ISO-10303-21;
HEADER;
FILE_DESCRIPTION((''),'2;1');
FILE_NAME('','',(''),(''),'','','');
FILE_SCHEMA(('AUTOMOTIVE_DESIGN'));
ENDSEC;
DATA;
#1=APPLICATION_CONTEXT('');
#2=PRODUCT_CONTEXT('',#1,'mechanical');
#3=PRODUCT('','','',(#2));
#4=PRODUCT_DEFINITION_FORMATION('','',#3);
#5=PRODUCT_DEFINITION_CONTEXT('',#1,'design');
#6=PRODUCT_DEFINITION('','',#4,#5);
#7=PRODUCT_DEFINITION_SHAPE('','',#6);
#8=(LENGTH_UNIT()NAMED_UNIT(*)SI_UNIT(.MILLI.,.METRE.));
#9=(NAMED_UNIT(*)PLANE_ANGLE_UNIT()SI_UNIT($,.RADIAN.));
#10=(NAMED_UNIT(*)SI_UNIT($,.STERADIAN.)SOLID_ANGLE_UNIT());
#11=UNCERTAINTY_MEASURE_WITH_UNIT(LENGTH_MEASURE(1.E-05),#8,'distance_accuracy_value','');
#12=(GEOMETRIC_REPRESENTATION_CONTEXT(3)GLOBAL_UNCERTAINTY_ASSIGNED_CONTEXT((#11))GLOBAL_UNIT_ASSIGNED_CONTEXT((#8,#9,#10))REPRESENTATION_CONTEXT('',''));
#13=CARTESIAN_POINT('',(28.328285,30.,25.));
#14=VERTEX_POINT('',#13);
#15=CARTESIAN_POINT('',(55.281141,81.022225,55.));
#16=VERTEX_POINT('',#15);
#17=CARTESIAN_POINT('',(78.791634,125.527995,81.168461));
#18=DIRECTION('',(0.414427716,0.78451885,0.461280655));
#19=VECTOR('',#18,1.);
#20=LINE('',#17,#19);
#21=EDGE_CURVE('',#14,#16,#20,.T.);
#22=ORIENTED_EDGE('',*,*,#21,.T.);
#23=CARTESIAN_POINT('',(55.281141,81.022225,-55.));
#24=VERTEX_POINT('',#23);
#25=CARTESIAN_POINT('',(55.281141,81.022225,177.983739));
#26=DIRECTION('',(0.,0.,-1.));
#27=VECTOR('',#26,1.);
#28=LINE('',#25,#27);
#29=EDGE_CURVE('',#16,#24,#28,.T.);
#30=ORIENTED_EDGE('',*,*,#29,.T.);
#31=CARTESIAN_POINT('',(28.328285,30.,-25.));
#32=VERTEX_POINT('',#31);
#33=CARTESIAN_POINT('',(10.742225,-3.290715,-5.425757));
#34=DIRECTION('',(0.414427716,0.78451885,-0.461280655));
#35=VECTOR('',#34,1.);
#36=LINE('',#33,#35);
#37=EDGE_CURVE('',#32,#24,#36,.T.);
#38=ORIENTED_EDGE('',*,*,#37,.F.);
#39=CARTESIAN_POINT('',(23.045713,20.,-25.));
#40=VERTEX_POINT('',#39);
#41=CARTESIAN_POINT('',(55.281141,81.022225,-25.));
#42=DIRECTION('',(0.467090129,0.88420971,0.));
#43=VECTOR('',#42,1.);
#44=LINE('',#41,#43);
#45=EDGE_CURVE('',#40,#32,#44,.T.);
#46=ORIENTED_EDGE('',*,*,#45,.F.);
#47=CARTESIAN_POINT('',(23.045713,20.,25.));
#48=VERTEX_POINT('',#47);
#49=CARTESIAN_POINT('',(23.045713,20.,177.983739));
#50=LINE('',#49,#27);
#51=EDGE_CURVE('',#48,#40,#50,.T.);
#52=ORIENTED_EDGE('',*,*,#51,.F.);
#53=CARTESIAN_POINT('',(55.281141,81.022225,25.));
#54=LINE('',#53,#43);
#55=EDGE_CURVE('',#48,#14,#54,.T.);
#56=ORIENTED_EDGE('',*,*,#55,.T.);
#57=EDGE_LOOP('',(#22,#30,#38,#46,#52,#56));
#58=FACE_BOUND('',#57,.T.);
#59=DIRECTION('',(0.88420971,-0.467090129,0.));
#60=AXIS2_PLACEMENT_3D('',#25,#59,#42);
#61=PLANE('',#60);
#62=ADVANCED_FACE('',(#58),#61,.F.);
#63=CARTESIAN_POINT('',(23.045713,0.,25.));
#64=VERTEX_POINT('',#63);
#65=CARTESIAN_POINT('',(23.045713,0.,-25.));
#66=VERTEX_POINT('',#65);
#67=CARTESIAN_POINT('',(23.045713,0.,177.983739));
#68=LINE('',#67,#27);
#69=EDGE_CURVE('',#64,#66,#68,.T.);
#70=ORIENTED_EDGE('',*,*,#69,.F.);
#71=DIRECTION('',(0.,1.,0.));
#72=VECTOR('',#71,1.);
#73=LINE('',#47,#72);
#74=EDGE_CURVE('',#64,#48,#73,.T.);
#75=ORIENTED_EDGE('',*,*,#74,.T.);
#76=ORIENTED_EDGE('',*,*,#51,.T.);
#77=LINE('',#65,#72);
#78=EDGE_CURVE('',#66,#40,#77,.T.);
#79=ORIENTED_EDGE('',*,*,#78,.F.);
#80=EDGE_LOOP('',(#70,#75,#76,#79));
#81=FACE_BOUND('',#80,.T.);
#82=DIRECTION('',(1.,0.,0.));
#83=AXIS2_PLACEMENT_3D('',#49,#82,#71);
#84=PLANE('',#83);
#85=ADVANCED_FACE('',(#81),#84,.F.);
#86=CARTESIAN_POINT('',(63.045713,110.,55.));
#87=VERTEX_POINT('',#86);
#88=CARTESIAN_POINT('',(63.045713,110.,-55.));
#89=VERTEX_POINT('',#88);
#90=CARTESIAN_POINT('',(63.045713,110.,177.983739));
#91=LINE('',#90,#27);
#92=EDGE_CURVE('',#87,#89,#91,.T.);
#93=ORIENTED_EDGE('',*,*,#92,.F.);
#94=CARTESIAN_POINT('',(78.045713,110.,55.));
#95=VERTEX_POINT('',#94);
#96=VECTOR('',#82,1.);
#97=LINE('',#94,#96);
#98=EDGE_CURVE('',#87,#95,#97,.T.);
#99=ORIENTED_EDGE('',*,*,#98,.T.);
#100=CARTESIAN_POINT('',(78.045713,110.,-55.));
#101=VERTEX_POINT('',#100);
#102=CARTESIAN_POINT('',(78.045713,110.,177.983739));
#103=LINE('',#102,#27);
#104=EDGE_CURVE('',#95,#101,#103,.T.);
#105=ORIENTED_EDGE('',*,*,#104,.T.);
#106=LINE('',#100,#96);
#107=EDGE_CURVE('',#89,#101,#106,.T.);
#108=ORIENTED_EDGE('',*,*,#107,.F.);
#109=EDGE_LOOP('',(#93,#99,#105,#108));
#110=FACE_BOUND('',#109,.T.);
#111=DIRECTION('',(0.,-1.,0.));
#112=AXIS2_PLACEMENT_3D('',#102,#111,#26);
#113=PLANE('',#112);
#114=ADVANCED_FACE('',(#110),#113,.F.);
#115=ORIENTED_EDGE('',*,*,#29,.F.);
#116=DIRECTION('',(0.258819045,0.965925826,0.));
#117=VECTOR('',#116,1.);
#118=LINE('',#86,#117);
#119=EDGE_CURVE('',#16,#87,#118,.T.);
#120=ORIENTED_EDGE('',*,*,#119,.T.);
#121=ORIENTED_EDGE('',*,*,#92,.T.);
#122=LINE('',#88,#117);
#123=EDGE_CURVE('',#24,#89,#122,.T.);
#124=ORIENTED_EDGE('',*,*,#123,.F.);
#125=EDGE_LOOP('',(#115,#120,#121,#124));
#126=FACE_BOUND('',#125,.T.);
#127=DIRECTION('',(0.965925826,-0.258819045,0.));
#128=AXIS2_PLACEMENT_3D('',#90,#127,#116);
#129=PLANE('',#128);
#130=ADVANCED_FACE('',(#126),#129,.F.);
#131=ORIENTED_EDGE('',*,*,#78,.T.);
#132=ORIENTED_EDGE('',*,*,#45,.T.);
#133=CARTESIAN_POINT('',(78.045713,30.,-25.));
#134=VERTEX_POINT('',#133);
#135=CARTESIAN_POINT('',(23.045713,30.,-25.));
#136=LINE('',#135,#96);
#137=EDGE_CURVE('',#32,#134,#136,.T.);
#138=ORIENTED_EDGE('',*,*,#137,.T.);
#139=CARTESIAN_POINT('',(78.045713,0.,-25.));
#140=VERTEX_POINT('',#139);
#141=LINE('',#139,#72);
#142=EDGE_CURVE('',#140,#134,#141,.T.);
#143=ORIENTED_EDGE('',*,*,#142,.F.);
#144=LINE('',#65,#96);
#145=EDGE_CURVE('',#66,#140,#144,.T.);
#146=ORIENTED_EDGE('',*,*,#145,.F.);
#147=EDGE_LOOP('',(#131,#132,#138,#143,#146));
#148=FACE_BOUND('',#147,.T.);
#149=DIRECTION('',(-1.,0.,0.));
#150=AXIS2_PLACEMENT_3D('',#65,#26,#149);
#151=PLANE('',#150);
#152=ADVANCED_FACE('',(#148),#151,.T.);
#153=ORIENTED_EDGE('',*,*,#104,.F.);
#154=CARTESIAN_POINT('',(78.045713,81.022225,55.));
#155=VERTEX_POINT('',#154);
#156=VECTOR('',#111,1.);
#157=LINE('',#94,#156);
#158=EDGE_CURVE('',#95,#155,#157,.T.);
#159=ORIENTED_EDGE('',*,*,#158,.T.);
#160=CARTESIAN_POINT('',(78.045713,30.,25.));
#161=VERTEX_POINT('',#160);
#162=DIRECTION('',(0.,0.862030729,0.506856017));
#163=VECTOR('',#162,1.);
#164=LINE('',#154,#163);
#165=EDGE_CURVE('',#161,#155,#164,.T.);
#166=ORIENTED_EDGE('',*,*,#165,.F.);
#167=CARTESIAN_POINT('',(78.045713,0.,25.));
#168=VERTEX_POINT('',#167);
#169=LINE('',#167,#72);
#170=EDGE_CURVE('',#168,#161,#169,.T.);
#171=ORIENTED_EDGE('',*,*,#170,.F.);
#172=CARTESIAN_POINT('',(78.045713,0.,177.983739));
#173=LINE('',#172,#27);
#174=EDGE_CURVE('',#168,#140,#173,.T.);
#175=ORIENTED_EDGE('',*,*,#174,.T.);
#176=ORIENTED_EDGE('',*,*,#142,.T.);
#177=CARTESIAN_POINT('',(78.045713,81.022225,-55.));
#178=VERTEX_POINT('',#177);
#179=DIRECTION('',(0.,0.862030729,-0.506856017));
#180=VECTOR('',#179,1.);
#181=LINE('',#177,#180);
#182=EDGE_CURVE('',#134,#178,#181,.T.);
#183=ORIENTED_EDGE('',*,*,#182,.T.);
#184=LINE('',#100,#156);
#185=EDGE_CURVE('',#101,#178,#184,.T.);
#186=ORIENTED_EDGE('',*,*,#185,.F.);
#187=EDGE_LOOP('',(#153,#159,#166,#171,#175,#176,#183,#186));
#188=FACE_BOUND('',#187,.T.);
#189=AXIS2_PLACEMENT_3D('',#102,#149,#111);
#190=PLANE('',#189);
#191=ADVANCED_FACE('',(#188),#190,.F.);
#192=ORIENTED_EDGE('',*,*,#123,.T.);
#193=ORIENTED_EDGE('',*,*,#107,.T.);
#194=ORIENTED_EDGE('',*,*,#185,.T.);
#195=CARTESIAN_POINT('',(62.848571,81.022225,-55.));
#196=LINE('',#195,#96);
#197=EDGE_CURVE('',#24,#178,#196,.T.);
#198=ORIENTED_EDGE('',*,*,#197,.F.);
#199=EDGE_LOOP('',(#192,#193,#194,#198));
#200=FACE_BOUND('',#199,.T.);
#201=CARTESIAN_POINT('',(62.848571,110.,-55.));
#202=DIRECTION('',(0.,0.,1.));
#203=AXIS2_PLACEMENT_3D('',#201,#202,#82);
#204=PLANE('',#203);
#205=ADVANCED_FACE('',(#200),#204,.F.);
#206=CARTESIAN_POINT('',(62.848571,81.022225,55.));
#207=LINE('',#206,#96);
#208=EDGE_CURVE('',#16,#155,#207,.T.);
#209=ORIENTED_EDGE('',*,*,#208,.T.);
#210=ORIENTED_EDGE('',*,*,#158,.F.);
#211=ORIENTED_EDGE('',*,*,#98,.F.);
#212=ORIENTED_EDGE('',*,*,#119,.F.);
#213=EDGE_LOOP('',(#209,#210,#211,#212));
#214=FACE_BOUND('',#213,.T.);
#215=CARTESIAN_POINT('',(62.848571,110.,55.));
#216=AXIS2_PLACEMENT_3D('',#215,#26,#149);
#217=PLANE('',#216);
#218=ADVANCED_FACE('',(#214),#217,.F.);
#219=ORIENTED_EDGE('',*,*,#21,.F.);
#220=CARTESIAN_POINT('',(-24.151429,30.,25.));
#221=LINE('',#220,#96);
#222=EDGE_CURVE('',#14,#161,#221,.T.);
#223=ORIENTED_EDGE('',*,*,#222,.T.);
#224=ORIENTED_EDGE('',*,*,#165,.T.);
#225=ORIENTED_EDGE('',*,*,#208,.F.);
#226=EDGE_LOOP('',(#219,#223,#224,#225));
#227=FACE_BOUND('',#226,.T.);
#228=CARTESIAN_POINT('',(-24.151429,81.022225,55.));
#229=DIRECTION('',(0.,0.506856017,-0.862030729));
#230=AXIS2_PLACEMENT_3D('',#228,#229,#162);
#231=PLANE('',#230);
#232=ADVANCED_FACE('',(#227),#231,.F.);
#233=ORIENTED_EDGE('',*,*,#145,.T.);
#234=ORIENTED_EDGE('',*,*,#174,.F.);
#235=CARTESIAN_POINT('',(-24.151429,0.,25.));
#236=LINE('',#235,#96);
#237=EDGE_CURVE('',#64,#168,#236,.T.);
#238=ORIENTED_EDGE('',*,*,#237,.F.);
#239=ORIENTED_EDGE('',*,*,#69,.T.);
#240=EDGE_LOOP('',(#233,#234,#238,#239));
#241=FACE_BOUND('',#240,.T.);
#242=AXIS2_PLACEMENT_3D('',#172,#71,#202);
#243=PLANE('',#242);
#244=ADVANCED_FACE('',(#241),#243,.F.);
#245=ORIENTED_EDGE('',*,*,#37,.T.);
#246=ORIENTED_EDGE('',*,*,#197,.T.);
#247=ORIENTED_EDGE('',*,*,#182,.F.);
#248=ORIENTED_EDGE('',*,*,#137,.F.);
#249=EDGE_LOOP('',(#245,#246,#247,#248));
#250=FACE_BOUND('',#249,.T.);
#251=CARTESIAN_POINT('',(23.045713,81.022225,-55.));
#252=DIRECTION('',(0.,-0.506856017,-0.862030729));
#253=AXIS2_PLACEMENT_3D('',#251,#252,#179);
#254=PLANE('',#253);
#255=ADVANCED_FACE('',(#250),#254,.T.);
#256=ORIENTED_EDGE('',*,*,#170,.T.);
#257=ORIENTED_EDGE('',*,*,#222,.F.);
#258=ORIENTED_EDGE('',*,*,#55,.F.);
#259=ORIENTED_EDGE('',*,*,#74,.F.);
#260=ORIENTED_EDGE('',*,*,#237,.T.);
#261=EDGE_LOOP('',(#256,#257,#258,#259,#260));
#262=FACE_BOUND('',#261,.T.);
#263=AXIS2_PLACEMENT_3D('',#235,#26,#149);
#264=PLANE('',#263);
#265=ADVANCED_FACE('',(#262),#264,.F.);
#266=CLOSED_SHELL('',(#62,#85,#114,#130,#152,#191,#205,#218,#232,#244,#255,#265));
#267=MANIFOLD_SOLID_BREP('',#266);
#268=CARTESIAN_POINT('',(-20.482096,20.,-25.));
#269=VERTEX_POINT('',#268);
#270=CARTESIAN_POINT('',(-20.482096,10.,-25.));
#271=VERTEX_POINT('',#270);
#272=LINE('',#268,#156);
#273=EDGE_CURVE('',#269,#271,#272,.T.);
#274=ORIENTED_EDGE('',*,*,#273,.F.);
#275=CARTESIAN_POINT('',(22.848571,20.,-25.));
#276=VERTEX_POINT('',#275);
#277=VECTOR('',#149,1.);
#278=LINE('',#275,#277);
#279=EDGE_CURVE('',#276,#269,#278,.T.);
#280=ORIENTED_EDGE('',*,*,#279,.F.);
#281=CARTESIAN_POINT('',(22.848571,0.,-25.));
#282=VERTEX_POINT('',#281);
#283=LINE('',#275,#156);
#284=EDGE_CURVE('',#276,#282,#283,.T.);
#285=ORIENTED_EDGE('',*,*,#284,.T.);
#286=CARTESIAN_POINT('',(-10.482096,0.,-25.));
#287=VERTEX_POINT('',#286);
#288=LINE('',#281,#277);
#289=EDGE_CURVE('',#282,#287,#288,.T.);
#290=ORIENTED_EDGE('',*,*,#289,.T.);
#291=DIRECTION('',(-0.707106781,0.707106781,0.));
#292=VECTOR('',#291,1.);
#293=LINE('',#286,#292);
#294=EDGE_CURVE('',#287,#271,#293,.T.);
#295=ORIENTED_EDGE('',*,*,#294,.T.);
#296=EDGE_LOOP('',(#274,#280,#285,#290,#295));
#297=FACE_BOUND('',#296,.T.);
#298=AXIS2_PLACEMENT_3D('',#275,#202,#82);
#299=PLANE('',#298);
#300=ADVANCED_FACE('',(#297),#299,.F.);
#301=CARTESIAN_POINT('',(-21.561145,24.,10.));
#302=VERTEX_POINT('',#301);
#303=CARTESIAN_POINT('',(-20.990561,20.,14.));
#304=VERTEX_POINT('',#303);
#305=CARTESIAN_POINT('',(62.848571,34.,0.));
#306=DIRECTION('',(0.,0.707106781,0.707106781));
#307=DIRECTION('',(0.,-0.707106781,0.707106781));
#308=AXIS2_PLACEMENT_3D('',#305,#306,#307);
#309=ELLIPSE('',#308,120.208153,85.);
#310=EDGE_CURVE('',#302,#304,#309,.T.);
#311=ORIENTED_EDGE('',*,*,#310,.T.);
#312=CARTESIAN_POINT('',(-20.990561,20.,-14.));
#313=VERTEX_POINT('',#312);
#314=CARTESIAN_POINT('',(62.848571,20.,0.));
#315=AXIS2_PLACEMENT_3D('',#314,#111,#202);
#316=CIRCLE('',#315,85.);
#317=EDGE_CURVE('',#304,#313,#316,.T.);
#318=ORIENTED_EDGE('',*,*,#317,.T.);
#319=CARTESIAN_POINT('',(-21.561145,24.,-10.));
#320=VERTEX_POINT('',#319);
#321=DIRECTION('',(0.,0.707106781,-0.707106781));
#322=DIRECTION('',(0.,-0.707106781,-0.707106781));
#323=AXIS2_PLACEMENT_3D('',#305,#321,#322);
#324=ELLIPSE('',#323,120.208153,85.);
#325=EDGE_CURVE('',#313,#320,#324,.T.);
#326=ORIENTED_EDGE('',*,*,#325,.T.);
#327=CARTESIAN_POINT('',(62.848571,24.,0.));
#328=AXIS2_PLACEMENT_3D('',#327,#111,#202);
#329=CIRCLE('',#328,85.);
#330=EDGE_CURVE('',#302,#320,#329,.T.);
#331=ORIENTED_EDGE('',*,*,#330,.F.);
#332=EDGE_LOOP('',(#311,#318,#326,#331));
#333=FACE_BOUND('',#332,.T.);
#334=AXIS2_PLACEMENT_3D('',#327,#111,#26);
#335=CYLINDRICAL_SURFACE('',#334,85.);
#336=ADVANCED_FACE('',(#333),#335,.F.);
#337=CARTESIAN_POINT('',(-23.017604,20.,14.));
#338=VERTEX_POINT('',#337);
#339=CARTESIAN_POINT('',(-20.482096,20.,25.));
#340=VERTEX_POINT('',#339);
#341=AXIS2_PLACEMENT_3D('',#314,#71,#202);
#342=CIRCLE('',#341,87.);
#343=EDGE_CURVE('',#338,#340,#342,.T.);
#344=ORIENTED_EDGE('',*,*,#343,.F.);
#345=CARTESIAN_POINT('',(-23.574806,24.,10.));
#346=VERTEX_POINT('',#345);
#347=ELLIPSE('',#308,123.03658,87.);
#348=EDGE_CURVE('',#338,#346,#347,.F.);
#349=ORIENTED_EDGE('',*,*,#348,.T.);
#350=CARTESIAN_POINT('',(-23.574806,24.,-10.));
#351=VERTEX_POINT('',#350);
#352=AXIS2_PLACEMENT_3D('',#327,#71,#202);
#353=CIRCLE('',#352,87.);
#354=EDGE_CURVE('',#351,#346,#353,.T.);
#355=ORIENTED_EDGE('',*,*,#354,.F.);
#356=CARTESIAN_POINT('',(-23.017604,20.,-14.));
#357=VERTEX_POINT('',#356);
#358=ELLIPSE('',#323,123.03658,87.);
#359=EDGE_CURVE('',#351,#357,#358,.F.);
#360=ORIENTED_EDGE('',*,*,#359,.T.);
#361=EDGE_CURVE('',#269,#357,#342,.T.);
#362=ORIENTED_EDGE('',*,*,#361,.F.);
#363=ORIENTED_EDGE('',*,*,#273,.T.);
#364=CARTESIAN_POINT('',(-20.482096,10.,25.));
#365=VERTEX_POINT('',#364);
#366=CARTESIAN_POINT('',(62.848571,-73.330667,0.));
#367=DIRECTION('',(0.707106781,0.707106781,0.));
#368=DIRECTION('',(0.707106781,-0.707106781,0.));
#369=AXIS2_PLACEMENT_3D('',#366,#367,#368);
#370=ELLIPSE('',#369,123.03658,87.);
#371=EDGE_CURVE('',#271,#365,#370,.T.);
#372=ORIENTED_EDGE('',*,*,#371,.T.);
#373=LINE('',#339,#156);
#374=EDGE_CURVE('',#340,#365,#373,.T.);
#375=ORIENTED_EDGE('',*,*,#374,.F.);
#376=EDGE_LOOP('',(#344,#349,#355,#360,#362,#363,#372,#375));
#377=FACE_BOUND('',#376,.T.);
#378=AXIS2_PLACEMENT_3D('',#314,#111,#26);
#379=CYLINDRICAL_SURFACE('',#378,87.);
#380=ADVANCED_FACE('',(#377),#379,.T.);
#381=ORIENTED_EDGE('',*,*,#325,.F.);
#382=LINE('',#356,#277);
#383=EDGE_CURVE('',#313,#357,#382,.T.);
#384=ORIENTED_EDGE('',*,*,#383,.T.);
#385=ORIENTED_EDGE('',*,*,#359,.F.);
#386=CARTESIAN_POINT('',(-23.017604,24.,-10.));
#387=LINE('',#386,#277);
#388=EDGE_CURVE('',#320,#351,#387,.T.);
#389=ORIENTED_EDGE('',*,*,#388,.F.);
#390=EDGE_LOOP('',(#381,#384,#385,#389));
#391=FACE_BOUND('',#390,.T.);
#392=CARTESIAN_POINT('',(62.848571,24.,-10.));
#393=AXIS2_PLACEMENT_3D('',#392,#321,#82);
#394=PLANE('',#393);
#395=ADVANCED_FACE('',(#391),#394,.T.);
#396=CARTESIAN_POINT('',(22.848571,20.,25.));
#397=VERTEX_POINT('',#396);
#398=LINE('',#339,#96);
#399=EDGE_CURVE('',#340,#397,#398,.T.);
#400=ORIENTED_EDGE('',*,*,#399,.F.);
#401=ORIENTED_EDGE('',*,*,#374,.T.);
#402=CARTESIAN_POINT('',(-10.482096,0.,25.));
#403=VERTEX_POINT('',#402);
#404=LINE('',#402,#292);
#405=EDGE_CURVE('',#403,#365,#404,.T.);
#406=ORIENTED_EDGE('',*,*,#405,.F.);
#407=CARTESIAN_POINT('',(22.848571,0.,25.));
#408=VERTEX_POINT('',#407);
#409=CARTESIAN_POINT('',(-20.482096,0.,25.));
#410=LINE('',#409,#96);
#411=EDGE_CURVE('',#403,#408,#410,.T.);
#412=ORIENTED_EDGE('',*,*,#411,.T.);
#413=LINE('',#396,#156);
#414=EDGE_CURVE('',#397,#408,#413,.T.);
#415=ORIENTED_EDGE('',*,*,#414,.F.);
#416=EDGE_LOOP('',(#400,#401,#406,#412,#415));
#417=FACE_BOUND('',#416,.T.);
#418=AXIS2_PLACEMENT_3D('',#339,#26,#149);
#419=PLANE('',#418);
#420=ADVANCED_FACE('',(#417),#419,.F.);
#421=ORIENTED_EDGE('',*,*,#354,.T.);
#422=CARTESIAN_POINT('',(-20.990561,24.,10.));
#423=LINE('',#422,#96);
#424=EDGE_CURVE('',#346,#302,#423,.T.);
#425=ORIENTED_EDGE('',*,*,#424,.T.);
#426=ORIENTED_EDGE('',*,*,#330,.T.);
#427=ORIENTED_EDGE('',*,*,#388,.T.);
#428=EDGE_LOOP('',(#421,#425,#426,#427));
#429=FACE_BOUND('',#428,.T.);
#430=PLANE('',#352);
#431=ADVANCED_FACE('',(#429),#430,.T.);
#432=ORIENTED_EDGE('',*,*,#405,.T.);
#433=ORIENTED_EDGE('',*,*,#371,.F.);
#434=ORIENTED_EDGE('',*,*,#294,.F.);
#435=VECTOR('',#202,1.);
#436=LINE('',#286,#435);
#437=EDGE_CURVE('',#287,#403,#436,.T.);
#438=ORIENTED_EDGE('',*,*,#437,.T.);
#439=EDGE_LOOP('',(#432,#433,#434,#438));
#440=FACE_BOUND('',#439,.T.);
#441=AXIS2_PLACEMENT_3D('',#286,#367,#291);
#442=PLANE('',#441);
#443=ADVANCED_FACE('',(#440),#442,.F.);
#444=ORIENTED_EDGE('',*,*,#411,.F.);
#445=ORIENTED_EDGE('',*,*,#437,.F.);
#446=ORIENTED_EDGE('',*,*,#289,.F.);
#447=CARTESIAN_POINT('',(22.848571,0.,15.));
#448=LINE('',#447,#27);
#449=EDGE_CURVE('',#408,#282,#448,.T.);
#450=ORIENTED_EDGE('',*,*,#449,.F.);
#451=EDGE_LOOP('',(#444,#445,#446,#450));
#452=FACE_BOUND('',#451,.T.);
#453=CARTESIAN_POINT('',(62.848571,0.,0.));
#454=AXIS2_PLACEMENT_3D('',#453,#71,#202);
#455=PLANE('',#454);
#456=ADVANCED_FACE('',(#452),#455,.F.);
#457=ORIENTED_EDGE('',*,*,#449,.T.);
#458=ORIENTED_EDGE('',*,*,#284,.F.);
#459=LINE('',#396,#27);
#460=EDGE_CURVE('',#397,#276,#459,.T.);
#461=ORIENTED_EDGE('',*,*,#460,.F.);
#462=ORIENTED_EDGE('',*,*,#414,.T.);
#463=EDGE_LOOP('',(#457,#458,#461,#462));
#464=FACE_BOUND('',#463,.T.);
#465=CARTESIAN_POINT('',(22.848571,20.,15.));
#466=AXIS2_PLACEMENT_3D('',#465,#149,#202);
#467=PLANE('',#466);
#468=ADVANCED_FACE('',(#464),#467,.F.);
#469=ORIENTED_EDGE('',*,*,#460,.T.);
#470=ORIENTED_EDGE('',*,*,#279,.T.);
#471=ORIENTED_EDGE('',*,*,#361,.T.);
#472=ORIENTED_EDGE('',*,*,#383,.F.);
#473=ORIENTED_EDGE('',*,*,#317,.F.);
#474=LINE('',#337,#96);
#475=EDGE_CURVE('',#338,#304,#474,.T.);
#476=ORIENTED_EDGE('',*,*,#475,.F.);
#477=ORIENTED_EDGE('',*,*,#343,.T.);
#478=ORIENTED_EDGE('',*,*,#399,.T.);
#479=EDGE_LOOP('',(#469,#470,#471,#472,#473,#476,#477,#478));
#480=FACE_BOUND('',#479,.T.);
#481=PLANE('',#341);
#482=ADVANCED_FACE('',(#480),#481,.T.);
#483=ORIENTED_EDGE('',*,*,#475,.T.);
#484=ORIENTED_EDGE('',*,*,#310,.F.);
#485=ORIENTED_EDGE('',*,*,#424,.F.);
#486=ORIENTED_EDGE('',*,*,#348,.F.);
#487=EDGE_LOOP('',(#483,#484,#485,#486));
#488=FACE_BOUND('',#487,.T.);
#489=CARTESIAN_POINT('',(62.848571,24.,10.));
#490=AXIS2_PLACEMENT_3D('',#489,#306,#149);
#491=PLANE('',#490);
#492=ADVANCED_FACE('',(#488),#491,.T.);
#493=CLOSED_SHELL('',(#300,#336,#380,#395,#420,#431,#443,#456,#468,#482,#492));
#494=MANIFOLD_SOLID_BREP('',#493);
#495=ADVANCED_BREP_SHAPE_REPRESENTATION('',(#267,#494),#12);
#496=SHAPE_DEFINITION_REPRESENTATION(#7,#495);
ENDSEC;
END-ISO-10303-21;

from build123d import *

# Parameters (mm, degrees)
DODANIE_WYCI_GNI_CIE1_DEPTH      = 20
WYTNIJ_WYCI_GNI_CIE1_DEPTH       = 60.019416665
DODANIE_WYCI_GNI_CIE2_DEPTH      = 4
SFAZOWANIE1_SIZE                 = 4
DODANIE_WYCI_GNI_CIE3_DEPTH      = 30
DODANIE_WYCI_GNI_CIE3_DEPTH_BACK = 80
WYTNIJ_WYCI_GNI_CIE2_DEPTH       = 160.903895728


with BuildPart() as part:
    # Szkic1 → Dodanie-wyciągnięcie1 (new body)
    with BuildSketch(Plane(origin=(0, 0, 0), x_dir=(1, 0, 0), z_dir=(0, 1, 0))):
        with BuildLine():
            Line((22.848570571, -15), (22.848570571, 25))
            Line((22.848570571, 25), (-20.482096053, 25))
            ThreePointArc((-20.482096053, 25), (-23.999572469, 5.138097937), (-22.848570571, -15))
            ThreePointArc((-22.848570571, -15), (-21.813108774, -20.034970687), (-20.482096053, -25))
            Line((-20.482096053, -25), (22.848570571, -25))
            Line((22.848570571, -25), (22.848570571, -15))
        make_face()
    extrude(amount=DODANIE_WYCI_GNI_CIE1_DEPTH)

    # Szkic2 → Wytnij-wyciągnięcie1 (cut, through all)
    with BuildSketch(Plane.XY.offset(25)):
        Polygon((-10.482096053, 0), (-25.036409358, 14.554313306), (-25.036409358, -2.735429271), (-10.482096053, -2.735429271), align=None)
    extrude(amount=-WYTNIJ_WYCI_GNI_CIE1_DEPTH, mode=Mode.SUBTRACT)

    # Szkic3 → Dodanie-wyciągnięcie2 (add)
    with BuildSketch(Plane(origin=(0, 20, 0), x_dir=(1, 0, 0), z_dir=(0, 1, 0))):
        with BuildLine():
            Line((-23.017604376, -14), (-20.990561104, -14))
            ThreePointArc((-20.990561104, -14), (-22.151429429, 0), (-20.990561104, 14))
            Line((-20.990561104, 14), (-23.017604376, 14))
            ThreePointArc((-23.017604376, 14), (-24.151429429, 0), (-23.017604376, -14))
        make_face()
    extrude(amount=DODANIE_WYCI_GNI_CIE2_DEPTH)

    # Sfazowanie1
    sfazowanie1_edges = [part.edges().sort_by_distance(p)[0] for p in [
        (-22.00408274, 24, -14),
        (-22.00408274, 24, 14),
    ]]
    chamfer(sfazowanie1_edges, length=SFAZOWANIE1_SIZE - 0.0001)  # a hair under: the kernel refuses the full size


with BuildPart() as body_2:
    # Szkic4 → Dodanie-wyciągnięcie3 (new, two sides: drawn at the far end of the back side and taken through both)
    with BuildSketch(Plane.XY.offset(25).offset(-DODANIE_WYCI_GNI_CIE3_DEPTH_BACK)):
        Polygon((63.045712747, 110), (55.281141394, 81.022225211), (23.045712747, 20), (23.045712747, 0), (63.045712747, 0), (78.045712747, 0), (78.045712747, 110), align=None)
    extrude(amount=DODANIE_WYCI_GNI_CIE3_DEPTH + DODANIE_WYCI_GNI_CIE3_DEPTH_BACK)

    # Szkic5 → Wytnij-wyciągnięcie2 (cut, through all)
    with BuildSketch(Plane(origin=(78.045712747, 0, 0), x_dir=(0, 0, -1), z_dir=(1, 0, 0))):
        Polygon((-55, 0), (-25, 0), (-25, 30), (-55, 81.022225211), align=None)
    wytnij_wyci_gni_cie2 = extrude(amount=-WYTNIJ_WYCI_GNI_CIE2_DEPTH, mode=Mode.SUBTRACT)

    # Lustro1: Wytnij-wyciągnięcie2 across plane
    add(wytnij_wyci_gni_cie2.mirror(Plane.XY), mode=Mode.SUBTRACT)


solid = Compound([part.part, body_2.part])
